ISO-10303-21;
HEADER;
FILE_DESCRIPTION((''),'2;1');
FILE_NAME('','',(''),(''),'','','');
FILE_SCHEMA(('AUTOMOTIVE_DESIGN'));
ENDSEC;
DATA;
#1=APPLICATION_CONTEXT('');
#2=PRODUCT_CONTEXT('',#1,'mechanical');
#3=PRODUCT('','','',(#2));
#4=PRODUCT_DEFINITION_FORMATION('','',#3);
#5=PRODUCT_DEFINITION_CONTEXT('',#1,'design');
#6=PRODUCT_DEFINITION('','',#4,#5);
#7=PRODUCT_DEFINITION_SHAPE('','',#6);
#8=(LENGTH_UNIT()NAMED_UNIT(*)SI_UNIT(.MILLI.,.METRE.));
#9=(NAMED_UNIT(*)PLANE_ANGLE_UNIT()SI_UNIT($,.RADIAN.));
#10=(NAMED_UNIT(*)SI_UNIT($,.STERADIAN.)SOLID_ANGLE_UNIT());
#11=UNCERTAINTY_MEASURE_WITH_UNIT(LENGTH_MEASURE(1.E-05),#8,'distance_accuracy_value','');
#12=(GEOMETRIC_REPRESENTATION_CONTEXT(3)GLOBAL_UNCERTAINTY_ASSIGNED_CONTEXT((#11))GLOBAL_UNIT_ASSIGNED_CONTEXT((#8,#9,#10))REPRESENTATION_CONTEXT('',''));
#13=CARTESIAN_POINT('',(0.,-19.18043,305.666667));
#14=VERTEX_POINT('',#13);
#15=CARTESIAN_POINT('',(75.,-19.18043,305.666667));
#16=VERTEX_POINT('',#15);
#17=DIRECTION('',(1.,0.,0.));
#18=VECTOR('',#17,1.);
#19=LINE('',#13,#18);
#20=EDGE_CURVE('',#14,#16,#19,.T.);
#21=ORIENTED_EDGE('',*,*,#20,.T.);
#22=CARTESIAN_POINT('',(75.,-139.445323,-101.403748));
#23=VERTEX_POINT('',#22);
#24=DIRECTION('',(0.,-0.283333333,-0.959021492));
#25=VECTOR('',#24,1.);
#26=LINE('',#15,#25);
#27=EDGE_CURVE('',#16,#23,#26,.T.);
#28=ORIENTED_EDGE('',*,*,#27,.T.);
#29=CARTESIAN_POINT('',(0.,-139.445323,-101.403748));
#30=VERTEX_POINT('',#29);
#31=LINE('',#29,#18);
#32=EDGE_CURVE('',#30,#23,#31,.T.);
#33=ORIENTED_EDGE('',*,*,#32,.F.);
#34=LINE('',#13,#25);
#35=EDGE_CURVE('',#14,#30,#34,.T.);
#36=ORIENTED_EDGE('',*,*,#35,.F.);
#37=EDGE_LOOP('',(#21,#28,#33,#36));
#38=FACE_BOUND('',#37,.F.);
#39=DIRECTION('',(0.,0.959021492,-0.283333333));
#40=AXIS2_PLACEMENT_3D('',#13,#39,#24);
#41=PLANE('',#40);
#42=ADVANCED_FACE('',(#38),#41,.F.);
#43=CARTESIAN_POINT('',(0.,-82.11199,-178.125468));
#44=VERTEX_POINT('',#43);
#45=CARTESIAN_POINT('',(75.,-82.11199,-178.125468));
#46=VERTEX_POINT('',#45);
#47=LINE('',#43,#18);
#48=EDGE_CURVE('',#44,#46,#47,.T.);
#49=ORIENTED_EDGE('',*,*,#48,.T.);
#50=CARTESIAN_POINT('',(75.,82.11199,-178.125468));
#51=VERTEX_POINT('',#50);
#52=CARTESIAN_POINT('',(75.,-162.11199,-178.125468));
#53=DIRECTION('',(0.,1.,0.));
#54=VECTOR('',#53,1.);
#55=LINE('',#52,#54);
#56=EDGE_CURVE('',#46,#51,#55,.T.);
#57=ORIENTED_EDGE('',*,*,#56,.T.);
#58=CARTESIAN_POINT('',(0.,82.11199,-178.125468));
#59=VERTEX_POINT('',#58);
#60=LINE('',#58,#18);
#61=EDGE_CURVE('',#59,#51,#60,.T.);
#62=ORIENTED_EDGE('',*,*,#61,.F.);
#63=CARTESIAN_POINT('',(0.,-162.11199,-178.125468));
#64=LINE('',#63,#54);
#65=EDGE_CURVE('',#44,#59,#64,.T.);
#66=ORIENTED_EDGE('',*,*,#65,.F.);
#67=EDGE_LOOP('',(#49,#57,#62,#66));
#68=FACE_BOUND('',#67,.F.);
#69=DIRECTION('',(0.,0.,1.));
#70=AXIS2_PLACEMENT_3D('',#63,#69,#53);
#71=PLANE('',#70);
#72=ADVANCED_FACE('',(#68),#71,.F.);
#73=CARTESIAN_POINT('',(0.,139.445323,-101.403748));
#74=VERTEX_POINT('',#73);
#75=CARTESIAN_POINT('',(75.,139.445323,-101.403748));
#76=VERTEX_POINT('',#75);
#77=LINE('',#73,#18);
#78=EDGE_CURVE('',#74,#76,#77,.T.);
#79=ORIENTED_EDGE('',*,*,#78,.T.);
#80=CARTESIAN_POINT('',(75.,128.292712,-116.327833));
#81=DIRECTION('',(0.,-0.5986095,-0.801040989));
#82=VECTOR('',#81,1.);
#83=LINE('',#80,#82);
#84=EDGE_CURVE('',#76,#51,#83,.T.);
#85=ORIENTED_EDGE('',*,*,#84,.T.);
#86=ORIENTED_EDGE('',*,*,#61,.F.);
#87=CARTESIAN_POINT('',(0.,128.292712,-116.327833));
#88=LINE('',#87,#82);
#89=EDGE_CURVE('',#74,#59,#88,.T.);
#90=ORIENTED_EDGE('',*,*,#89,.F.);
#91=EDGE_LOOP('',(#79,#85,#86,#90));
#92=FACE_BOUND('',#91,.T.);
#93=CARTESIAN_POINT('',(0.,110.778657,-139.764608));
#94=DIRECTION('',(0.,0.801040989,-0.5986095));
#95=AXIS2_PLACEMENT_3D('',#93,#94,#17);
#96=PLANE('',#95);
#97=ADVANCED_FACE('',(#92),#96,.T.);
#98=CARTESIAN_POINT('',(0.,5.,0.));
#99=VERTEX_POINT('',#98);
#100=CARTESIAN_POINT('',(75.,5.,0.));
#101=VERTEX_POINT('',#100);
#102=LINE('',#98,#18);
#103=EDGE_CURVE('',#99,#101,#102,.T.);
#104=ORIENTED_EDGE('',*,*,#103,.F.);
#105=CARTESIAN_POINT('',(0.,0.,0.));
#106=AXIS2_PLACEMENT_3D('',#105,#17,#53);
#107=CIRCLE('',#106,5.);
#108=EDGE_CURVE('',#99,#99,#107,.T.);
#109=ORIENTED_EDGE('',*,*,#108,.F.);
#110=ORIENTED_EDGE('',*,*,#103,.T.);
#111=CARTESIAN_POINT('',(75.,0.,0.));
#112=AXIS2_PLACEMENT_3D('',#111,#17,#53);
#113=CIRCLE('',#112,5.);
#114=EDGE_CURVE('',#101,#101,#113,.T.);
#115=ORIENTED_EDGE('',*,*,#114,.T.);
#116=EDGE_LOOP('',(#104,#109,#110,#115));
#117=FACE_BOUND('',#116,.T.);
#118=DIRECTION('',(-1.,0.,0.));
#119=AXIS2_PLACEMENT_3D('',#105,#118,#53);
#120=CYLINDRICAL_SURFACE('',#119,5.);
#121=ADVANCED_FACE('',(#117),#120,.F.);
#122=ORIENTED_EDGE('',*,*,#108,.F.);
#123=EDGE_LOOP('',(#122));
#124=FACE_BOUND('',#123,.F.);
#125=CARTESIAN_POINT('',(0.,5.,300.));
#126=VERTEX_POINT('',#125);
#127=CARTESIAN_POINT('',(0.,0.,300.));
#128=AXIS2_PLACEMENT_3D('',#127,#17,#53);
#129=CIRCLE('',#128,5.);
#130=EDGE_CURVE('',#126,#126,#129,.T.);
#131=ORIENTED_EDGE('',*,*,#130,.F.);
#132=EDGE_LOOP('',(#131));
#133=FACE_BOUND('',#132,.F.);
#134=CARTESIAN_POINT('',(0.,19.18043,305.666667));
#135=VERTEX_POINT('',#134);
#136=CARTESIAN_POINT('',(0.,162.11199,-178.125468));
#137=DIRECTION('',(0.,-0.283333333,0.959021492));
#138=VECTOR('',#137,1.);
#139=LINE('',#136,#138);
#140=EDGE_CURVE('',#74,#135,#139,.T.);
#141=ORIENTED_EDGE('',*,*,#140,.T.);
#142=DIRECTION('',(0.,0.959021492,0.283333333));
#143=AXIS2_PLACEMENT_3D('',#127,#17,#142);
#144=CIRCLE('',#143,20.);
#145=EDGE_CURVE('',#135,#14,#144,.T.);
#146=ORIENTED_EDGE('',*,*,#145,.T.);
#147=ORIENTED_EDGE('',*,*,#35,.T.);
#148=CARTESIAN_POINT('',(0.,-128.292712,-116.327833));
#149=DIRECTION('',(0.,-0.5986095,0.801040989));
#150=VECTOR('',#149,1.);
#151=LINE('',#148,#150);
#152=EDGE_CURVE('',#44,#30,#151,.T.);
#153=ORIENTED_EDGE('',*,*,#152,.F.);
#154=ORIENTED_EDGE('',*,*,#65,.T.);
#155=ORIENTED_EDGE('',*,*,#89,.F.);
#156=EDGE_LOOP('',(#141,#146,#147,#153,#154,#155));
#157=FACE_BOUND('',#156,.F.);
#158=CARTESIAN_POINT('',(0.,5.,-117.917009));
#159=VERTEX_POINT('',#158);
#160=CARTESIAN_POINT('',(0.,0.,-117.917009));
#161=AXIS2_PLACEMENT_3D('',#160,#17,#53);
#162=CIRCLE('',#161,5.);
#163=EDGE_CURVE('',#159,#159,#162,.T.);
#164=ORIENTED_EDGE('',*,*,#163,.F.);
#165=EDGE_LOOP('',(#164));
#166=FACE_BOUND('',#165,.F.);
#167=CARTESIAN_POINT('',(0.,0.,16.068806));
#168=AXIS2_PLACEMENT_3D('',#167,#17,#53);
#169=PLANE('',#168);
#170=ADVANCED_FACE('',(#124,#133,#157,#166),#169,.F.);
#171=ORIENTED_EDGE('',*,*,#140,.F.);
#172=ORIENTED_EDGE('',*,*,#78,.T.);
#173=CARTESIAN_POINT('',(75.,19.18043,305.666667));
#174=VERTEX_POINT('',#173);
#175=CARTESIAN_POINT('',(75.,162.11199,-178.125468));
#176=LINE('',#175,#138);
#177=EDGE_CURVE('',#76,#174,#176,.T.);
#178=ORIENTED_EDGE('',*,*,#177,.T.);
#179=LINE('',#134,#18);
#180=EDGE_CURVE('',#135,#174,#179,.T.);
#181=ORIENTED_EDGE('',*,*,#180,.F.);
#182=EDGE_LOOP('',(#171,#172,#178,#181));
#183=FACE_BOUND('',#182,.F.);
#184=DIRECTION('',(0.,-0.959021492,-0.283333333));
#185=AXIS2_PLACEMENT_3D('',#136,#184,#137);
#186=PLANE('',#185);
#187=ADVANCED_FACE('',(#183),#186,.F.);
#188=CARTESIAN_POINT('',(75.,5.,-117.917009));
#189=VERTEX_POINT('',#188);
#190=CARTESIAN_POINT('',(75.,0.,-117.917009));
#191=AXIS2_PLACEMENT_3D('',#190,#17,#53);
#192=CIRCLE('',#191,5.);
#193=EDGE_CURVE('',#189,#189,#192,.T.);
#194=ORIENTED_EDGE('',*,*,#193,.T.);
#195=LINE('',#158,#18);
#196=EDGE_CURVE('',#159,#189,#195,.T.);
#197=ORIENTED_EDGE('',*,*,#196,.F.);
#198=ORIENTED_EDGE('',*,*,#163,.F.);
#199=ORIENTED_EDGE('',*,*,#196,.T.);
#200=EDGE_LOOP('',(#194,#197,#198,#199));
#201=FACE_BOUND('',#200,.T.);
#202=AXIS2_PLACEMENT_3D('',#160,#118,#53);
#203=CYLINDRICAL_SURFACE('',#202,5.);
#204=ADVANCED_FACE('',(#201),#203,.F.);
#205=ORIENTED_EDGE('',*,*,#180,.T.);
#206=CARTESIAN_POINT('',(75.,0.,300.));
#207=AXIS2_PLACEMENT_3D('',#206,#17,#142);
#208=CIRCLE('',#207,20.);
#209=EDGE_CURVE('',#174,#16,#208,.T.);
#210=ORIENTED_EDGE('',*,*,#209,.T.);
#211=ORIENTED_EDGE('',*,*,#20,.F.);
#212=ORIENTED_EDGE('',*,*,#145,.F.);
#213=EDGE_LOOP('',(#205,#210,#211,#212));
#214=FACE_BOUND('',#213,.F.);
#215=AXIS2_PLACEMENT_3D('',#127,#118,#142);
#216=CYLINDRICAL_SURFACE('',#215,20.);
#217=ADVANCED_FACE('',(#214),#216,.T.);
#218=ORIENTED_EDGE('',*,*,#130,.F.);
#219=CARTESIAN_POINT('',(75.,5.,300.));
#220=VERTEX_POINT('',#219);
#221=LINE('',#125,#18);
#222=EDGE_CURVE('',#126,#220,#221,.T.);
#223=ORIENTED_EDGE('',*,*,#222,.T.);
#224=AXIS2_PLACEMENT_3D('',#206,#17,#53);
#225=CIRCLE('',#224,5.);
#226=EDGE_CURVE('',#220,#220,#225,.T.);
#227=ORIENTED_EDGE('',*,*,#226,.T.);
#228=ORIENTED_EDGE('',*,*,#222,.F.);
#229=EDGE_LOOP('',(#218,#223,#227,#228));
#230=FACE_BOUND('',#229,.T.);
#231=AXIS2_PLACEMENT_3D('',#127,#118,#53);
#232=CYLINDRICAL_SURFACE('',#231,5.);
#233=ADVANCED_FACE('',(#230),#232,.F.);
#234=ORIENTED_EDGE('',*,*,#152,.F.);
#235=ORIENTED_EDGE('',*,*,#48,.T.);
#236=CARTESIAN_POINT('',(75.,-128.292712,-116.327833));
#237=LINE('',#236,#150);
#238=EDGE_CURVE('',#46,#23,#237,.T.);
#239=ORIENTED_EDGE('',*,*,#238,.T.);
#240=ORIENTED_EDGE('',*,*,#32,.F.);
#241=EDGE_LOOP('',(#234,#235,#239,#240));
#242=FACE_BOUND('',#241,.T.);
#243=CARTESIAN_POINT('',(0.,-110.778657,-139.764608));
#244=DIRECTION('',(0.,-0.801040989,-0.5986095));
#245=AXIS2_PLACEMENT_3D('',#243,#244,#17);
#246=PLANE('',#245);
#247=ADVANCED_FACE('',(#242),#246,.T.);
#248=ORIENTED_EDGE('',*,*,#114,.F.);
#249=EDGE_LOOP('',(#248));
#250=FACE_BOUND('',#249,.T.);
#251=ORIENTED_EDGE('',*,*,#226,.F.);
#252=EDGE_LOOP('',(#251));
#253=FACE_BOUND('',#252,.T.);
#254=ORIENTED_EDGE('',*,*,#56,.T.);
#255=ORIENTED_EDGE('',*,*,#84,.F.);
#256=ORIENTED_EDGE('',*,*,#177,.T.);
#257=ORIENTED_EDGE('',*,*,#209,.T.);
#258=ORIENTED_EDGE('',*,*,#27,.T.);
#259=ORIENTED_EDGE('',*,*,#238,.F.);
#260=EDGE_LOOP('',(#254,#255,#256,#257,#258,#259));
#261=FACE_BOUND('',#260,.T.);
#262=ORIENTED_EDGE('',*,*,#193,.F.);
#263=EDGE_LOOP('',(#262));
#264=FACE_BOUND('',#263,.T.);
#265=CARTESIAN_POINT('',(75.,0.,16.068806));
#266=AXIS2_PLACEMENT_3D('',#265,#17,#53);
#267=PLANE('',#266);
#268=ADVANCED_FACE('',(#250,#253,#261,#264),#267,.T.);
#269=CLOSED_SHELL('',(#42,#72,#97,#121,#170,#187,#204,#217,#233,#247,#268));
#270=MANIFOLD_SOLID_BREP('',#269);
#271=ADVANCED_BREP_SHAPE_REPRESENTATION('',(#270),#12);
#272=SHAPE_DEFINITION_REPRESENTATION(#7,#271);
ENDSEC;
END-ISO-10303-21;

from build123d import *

# Parameters (mm, degrees)
F0_R     = 5
F1_DEPTH = 75
F2_SIZE  = 80


# Not quite as in the source:
# - a feature names something its author has since deleted; it is built from what else it names


with BuildPart() as f1:
    # F0 (on Right) → F1 (new body)
    with BuildSketch(Plane.YZ):
        with BuildLine():
            Line((162.1119900143, -178.1254678004), (19.1804298411, 305.6666666667))
            ThreePointArc((19.1804298411, 305.6666666667), (0, 320), (-19.1804298411, 305.6666666667))
            Line((-19.1804298411, 305.6666666667), (-162.1119900143, -178.1254678004))
            Line((-162.1119900143, -178.1254678004), (162.1119900143, -178.1254678004))
        make_face()
        with Locations((0, -117.917008698)):
            Circle(F0_R, mode=Mode.SUBTRACT)
        Circle(F0_R, mode=Mode.SUBTRACT)
        with Locations((0, 300)):
            Circle(F0_R, mode=Mode.SUBTRACT)
    extrude(amount=F1_DEPTH)

    # F2
    f2_edges = [f1.edges().sort_by_distance(p)[0] for p in [
        (37.5, 162.11199, -178.125468),
        (37.5, -162.11199, -178.125468),
    ]]
    chamfer(f2_edges, length=F2_SIZE)


solid = f1.part
